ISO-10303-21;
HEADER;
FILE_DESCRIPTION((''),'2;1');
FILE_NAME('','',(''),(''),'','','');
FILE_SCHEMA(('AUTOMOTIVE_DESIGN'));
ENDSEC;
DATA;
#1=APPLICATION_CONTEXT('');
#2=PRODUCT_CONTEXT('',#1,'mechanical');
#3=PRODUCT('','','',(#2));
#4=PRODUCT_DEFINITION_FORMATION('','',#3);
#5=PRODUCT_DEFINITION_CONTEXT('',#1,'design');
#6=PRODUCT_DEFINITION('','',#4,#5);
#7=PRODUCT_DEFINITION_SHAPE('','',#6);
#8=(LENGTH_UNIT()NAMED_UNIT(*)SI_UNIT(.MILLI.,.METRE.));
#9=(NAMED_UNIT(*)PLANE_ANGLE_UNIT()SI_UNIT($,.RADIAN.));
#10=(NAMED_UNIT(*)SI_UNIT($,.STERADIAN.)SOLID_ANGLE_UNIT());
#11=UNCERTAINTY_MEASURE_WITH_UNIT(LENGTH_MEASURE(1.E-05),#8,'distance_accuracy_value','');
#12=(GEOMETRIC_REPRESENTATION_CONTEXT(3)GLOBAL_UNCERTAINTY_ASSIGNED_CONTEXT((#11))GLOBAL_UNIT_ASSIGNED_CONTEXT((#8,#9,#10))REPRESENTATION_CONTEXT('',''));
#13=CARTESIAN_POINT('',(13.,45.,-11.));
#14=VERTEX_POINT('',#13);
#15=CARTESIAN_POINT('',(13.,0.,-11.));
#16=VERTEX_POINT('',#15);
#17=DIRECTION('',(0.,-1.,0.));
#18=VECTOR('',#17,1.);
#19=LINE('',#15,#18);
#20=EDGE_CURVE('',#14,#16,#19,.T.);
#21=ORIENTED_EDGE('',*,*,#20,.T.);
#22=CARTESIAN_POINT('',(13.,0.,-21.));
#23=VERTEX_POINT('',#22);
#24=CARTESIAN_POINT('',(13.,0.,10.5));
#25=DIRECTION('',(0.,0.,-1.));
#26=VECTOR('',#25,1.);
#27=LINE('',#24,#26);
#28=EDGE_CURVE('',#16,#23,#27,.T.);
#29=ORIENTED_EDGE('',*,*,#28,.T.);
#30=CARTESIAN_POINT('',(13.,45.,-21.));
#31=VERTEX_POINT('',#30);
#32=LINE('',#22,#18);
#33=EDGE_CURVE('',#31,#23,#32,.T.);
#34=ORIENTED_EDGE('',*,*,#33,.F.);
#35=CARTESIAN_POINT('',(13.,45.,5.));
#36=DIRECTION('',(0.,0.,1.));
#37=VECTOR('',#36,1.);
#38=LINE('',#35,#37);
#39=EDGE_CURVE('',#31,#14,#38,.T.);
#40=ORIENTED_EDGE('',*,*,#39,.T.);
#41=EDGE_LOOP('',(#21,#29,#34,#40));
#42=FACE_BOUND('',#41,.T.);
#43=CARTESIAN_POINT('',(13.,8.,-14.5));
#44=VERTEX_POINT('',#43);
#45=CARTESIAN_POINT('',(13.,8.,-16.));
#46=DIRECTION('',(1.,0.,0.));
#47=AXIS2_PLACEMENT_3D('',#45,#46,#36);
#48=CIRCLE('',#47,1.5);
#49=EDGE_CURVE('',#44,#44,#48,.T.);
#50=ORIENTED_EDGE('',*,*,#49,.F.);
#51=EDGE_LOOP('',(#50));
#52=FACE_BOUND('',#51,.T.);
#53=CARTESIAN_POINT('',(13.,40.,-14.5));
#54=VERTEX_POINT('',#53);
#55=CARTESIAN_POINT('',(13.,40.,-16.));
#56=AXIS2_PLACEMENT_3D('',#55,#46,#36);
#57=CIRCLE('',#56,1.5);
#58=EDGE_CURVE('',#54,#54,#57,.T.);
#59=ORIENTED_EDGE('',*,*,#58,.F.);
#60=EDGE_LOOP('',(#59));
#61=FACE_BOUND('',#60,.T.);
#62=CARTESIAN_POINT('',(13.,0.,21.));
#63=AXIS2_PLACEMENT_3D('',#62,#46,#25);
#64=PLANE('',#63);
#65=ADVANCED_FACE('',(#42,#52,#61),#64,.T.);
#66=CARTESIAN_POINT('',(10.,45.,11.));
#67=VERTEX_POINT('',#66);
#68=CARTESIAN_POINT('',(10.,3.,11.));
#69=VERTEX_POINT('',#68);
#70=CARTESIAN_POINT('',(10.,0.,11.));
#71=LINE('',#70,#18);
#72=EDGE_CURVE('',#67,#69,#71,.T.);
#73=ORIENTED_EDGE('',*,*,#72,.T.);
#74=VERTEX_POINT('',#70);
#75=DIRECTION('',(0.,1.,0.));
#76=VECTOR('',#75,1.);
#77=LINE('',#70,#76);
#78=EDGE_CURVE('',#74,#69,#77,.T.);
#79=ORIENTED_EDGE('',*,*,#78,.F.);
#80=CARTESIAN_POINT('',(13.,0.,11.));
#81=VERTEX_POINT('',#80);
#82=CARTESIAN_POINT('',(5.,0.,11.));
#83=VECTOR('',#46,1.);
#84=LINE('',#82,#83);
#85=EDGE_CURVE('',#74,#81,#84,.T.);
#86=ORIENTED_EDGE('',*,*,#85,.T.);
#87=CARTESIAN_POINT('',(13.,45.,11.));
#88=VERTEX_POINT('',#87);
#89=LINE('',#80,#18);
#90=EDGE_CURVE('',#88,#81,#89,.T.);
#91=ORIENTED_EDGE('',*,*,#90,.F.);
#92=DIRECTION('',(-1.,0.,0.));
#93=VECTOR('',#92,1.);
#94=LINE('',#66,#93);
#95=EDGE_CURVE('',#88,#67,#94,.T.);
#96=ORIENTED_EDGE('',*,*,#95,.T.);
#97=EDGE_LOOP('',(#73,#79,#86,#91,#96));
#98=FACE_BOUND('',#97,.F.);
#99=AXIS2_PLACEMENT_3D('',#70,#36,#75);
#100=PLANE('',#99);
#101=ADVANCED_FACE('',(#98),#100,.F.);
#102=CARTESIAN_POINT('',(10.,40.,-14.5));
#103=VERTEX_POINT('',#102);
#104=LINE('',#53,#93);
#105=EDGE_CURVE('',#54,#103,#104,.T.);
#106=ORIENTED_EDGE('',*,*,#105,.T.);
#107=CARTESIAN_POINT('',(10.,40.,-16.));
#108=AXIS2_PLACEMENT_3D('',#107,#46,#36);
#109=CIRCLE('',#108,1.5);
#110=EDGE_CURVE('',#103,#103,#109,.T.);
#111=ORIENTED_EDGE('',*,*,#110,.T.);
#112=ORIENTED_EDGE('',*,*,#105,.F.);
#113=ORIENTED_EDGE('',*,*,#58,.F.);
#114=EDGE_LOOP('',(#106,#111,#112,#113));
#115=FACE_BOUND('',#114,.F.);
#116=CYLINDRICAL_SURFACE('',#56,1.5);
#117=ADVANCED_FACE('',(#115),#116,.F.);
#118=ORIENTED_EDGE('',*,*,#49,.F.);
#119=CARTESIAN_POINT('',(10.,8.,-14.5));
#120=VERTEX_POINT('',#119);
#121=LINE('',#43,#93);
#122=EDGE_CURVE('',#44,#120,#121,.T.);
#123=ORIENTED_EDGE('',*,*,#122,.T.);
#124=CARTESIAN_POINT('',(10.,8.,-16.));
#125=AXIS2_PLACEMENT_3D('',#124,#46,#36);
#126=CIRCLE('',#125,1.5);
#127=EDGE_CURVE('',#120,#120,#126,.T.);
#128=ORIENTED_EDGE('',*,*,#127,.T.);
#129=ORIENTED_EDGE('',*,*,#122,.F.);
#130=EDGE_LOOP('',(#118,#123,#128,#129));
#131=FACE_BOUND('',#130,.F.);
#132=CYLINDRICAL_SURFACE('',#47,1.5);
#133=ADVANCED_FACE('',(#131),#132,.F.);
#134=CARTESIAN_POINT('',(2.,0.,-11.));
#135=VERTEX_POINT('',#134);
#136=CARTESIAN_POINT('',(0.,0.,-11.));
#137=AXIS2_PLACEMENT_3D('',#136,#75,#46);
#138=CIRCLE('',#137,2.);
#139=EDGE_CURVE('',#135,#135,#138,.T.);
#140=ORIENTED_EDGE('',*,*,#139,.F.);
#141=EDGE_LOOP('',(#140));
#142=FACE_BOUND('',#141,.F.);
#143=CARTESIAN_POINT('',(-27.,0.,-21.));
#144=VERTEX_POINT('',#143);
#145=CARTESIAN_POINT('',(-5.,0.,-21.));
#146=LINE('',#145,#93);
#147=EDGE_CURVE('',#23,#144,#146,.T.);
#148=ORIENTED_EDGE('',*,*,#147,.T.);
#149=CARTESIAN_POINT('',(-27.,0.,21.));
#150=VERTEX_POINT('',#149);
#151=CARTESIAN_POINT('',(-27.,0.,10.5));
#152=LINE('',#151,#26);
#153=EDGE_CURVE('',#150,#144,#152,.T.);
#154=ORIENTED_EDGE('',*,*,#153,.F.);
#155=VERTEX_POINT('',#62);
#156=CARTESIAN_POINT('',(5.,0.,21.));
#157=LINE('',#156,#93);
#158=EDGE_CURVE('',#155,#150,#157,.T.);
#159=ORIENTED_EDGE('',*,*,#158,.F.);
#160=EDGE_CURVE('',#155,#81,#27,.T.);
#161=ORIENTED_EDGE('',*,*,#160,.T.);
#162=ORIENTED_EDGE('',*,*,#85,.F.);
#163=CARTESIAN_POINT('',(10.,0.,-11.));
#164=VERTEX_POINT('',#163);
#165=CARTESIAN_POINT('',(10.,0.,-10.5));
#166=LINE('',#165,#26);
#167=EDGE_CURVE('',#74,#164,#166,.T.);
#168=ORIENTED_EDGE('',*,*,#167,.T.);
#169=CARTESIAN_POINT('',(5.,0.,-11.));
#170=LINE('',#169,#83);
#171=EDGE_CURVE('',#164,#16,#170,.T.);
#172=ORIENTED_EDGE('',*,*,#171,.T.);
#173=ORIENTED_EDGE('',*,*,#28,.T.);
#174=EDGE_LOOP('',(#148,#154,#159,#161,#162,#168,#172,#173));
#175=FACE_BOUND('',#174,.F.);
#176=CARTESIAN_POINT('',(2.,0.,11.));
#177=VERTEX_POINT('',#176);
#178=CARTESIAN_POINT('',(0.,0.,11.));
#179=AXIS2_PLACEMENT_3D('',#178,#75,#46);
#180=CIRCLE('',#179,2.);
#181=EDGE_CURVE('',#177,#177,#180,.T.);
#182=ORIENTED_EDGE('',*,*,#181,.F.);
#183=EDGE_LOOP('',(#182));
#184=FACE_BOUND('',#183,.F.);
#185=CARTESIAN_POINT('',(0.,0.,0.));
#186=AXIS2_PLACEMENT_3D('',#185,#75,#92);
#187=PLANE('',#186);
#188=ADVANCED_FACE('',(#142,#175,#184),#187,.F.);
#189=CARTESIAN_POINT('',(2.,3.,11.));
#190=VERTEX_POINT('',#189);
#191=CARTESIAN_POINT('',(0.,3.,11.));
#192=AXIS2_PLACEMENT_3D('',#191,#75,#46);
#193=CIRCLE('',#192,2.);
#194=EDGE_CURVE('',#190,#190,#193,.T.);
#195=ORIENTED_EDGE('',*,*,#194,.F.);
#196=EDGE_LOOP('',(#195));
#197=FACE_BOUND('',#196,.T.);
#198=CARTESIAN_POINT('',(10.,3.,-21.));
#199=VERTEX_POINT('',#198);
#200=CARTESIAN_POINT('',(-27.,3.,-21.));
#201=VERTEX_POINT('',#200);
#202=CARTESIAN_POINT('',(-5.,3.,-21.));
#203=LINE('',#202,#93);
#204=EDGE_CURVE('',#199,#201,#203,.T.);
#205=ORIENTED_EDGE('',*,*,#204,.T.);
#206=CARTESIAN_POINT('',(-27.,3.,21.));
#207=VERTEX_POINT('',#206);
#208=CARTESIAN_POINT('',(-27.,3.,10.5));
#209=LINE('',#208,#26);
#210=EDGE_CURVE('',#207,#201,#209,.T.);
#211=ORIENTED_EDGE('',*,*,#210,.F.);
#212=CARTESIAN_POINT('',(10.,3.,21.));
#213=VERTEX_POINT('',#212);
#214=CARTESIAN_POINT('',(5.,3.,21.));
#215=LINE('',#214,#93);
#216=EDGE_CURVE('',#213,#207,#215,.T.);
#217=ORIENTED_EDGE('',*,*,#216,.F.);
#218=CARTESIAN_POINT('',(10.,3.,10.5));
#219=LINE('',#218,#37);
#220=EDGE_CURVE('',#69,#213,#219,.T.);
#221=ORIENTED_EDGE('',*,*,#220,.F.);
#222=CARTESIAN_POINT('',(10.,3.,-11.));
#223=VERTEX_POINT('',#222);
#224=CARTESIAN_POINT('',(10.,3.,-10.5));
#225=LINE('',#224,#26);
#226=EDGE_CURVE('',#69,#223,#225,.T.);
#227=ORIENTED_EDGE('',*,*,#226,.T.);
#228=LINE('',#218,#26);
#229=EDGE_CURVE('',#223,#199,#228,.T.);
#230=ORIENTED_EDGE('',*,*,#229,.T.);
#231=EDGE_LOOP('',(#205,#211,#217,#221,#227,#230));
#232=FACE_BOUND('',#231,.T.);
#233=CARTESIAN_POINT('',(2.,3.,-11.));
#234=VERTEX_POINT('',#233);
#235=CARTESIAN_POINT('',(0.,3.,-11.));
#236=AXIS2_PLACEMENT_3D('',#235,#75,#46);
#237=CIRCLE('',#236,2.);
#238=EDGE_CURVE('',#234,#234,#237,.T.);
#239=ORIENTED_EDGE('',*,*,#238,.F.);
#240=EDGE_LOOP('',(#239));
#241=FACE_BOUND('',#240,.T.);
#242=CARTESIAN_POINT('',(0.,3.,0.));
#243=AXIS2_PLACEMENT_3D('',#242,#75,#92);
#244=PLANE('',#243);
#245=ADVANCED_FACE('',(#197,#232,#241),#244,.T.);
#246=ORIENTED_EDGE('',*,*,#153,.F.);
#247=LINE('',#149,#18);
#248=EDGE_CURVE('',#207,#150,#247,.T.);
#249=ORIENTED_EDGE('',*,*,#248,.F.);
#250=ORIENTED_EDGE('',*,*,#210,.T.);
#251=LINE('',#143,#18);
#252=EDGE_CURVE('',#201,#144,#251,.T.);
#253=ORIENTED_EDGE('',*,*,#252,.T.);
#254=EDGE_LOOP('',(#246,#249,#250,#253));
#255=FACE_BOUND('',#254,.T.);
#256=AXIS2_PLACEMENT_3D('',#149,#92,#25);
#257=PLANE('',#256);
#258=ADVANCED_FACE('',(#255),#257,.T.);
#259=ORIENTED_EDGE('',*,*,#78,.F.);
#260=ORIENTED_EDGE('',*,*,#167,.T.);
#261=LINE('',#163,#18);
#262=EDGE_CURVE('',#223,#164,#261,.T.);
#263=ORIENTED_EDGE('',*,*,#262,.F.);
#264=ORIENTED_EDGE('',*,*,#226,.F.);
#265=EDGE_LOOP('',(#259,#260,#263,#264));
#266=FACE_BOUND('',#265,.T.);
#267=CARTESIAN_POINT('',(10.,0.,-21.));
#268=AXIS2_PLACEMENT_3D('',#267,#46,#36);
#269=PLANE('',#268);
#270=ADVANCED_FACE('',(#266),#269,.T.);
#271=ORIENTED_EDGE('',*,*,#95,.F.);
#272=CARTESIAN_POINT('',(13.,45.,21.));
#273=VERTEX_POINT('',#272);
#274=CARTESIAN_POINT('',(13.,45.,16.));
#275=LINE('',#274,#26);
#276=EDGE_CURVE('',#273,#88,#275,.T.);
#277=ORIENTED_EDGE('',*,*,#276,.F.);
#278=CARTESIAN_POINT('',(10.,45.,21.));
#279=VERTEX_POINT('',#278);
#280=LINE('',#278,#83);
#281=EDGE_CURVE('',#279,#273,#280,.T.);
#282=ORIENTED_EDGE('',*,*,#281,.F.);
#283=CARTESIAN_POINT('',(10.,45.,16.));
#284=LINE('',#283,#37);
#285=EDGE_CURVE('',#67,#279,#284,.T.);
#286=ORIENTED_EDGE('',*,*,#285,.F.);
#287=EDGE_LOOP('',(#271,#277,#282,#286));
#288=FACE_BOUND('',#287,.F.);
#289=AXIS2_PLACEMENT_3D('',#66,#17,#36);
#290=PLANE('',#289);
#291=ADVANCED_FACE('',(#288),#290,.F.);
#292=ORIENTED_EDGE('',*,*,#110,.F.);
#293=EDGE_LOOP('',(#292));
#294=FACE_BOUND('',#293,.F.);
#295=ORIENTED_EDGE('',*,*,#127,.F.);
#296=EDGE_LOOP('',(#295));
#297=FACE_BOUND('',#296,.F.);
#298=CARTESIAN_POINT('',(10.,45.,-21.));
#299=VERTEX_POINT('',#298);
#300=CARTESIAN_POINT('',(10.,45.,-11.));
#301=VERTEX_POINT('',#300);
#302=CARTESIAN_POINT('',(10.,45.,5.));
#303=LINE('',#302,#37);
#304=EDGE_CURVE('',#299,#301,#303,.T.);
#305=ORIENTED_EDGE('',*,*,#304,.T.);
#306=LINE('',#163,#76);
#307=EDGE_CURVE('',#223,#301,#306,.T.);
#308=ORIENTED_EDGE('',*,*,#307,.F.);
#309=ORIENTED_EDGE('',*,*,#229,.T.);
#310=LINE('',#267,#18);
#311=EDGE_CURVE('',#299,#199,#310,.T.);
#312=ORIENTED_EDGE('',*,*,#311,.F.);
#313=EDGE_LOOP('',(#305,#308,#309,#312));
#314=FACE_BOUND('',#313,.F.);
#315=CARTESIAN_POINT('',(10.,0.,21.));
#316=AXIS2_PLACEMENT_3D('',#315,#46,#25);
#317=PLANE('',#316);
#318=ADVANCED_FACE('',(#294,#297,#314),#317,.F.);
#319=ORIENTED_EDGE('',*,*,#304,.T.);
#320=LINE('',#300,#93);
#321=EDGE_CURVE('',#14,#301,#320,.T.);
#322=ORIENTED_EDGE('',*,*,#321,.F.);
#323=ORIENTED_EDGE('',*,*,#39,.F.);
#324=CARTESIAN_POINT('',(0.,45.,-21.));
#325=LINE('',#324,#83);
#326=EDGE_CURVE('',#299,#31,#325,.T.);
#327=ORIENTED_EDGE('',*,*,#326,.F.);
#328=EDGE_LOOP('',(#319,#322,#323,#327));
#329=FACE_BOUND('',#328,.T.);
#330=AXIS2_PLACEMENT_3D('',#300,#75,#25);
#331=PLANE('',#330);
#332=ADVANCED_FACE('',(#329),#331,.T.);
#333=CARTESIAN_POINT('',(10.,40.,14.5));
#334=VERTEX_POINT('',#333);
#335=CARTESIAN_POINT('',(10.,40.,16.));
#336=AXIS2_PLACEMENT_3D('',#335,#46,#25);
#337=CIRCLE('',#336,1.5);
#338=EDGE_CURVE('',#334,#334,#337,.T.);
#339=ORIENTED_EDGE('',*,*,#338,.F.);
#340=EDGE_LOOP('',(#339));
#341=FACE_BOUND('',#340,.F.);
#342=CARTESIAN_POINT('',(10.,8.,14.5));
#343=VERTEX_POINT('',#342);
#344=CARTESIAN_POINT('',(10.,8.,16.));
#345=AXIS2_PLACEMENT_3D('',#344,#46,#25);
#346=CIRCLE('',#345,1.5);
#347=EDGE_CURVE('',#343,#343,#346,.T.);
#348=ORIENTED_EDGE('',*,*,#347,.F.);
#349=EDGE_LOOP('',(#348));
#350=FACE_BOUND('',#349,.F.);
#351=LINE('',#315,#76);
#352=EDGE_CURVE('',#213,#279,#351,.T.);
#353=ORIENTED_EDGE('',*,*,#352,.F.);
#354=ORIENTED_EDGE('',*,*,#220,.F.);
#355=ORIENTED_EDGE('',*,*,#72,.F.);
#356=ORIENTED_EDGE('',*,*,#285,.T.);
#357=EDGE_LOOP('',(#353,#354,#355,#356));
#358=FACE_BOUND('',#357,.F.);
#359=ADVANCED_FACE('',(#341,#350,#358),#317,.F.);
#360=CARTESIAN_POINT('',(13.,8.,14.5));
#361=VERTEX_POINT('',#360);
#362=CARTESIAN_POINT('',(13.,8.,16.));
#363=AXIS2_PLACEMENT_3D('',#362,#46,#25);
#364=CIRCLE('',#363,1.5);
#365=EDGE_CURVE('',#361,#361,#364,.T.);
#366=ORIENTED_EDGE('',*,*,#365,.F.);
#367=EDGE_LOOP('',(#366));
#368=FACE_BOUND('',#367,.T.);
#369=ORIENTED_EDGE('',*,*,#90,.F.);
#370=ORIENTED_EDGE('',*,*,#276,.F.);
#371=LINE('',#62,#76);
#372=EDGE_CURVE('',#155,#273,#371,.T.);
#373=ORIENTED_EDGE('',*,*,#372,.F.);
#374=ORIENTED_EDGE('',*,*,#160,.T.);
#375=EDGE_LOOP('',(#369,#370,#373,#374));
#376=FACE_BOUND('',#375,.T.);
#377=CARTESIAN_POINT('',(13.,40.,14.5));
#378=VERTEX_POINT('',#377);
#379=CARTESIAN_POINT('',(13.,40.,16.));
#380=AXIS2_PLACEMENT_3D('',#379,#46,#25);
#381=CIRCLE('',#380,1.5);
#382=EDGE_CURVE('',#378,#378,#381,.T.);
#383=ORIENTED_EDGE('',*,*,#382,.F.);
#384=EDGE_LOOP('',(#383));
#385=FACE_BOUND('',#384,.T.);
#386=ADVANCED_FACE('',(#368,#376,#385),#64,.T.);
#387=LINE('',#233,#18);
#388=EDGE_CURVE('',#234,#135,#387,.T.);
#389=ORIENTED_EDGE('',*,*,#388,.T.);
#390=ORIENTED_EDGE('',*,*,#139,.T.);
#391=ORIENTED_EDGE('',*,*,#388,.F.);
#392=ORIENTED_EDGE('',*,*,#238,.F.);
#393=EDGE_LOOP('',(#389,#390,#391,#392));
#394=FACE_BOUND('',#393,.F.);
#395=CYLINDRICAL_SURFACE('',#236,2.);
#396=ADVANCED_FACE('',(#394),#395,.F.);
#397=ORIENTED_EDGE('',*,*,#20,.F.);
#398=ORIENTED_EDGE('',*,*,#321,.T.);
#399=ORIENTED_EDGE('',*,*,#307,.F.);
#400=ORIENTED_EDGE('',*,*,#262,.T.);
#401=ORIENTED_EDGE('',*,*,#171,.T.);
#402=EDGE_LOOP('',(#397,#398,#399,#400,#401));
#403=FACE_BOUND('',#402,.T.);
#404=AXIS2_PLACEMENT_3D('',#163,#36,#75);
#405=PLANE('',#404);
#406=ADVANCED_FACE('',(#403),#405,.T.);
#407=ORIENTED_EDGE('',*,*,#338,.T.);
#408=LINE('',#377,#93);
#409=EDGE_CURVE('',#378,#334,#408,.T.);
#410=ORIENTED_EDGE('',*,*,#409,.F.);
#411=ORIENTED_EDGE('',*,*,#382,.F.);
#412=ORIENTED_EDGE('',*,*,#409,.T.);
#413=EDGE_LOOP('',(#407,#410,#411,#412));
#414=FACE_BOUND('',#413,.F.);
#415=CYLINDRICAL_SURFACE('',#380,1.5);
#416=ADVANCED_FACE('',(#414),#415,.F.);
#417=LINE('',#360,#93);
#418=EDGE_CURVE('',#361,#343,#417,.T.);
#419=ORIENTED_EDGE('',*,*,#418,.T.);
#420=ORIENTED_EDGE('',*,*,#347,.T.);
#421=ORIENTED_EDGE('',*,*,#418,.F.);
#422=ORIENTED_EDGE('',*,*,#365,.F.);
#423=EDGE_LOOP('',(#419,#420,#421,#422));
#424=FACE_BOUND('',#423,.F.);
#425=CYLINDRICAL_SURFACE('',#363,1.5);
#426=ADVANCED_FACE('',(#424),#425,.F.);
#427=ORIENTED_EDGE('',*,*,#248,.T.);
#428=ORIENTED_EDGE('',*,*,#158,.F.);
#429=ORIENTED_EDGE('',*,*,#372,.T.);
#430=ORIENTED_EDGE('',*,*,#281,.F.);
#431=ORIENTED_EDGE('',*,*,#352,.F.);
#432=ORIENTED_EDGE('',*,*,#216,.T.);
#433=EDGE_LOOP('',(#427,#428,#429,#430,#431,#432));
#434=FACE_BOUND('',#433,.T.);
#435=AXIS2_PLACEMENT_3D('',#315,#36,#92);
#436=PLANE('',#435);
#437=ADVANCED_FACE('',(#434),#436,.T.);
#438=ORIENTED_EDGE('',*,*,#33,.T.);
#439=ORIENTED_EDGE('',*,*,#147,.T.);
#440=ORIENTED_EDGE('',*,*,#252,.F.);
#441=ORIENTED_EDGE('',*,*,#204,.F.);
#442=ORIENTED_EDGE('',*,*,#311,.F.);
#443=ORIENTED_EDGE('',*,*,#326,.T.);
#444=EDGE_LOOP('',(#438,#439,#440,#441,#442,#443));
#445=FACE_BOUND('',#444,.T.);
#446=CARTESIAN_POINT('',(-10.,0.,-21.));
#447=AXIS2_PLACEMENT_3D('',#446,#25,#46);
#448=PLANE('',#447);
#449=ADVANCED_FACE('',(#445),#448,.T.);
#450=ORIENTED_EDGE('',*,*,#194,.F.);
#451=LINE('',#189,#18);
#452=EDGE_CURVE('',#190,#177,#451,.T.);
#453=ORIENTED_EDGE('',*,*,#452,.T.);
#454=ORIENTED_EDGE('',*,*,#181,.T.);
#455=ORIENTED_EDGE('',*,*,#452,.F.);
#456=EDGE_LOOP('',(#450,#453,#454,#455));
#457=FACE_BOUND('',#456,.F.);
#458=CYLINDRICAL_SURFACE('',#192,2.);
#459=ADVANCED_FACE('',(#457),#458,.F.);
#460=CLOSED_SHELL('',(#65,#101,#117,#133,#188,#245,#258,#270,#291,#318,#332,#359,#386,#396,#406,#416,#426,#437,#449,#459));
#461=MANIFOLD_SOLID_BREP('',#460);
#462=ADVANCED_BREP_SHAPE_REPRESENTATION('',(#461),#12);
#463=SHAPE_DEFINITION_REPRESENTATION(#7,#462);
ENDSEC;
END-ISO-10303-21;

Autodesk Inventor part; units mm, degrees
ref_plane "YZ Plane" through (0, 0, 0) normal (1, 0, 0) x (0, 1, 0)
ref_plane "XZ Plane" through (0, 0, 0) normal (0, 1, 0) x (-1, 0, 0)
ref_plane "XY Plane" through (0, 0, 0) normal (0, 0, 1) x (1, 0, 0)
sketch "Sketch1" plane through (0, 0, 0) normal (0, 1, 0) x (-1, 0, 0)
  line L0 (-10, 21) -> (10, 21)
  line L1 (10, 21) -> (10, -21)
  line L2 (10, -21) -> (-10, -21)
  line L3 (-10, -21) -> (-10, 21)
  line L4 (-10, 21) -> (10, -21) construction
  line L5 (10, 21) -> (-10, -21) construction
  point P0 (0, 0)
  dimension "d0" = 20
  dimension "d1" = 42
extrude "Extrusion1" add sketch "Sketch1" along normal blind 3
sketch "Sketch2" plane through (10, 0, 21) normal (1, 0, 0) x (0, 0, -1)
  line L0 (0, 0) -> (10, 0)
  line L1 (10, 0) -> (10, 45)
  line L2 (10, 45) -> (0, 45)
  line L3 (0, 45) -> (0, 0)
  line L4 (42, 0) -> (0, 0) projected
  line L5 (42, 0) -> (32, 0)
  line L6 (32, 0) -> (32, 45)
  line L7 (32, 45) -> (42, 45)
  line L8 (42, 45) -> (42, 0)
  point P0 (21, 0)
  dimension "d4" = 10
  dimension "d5" = 45
  dimension "d6" = 10
  dimension "d7" = 45
extrude "Extrusion2" add sketch "Sketch2" along normal blind 3
sketch "Sketch3" plane through (13, 0, 21) normal (1, 0, 0) x (0, 0, -1)
  circle A0 centre (5, 40) radius 1.5
  circle A1 centre (5, 8) radius 1.5
  point P0 (21, 0)
  dimension "d10" = 3
  dimension "d11" = 3
extrude "Extrusion3" cut sketch "Sketch3" against normal blind 3
mirror "Mirror1" about plane through (0, 0, 0) normal (0, 0, 1) of "Extrusion3"
sketch "Sketch5" plane through (0, 3, 0) normal (0, 1, 0) x (1, 0, 0)
  circle A0 centre (0, -11) radius 2
  circle A1 centre (0, 11) radius 2
  point P0 (0, 0)
  dimension "d18" = 4
  dimension "d19" = 4
extrude "Extrusion5" cut sketch "Sketch5" against normal blind 3
sketch "Sketch6" plane through (0, 3, 0) normal (0, 1, 0) x (1, 0, 0)
  point P0 (0, 0)
thicken "Thicken1" operation add thickness 17 both sides no extend neighbours yes toward (-1, 0, 0) faces at (-10, 1, -7)
properties part number "vertical_axis_motor_metal_holder" material "Aluminum 6061"
